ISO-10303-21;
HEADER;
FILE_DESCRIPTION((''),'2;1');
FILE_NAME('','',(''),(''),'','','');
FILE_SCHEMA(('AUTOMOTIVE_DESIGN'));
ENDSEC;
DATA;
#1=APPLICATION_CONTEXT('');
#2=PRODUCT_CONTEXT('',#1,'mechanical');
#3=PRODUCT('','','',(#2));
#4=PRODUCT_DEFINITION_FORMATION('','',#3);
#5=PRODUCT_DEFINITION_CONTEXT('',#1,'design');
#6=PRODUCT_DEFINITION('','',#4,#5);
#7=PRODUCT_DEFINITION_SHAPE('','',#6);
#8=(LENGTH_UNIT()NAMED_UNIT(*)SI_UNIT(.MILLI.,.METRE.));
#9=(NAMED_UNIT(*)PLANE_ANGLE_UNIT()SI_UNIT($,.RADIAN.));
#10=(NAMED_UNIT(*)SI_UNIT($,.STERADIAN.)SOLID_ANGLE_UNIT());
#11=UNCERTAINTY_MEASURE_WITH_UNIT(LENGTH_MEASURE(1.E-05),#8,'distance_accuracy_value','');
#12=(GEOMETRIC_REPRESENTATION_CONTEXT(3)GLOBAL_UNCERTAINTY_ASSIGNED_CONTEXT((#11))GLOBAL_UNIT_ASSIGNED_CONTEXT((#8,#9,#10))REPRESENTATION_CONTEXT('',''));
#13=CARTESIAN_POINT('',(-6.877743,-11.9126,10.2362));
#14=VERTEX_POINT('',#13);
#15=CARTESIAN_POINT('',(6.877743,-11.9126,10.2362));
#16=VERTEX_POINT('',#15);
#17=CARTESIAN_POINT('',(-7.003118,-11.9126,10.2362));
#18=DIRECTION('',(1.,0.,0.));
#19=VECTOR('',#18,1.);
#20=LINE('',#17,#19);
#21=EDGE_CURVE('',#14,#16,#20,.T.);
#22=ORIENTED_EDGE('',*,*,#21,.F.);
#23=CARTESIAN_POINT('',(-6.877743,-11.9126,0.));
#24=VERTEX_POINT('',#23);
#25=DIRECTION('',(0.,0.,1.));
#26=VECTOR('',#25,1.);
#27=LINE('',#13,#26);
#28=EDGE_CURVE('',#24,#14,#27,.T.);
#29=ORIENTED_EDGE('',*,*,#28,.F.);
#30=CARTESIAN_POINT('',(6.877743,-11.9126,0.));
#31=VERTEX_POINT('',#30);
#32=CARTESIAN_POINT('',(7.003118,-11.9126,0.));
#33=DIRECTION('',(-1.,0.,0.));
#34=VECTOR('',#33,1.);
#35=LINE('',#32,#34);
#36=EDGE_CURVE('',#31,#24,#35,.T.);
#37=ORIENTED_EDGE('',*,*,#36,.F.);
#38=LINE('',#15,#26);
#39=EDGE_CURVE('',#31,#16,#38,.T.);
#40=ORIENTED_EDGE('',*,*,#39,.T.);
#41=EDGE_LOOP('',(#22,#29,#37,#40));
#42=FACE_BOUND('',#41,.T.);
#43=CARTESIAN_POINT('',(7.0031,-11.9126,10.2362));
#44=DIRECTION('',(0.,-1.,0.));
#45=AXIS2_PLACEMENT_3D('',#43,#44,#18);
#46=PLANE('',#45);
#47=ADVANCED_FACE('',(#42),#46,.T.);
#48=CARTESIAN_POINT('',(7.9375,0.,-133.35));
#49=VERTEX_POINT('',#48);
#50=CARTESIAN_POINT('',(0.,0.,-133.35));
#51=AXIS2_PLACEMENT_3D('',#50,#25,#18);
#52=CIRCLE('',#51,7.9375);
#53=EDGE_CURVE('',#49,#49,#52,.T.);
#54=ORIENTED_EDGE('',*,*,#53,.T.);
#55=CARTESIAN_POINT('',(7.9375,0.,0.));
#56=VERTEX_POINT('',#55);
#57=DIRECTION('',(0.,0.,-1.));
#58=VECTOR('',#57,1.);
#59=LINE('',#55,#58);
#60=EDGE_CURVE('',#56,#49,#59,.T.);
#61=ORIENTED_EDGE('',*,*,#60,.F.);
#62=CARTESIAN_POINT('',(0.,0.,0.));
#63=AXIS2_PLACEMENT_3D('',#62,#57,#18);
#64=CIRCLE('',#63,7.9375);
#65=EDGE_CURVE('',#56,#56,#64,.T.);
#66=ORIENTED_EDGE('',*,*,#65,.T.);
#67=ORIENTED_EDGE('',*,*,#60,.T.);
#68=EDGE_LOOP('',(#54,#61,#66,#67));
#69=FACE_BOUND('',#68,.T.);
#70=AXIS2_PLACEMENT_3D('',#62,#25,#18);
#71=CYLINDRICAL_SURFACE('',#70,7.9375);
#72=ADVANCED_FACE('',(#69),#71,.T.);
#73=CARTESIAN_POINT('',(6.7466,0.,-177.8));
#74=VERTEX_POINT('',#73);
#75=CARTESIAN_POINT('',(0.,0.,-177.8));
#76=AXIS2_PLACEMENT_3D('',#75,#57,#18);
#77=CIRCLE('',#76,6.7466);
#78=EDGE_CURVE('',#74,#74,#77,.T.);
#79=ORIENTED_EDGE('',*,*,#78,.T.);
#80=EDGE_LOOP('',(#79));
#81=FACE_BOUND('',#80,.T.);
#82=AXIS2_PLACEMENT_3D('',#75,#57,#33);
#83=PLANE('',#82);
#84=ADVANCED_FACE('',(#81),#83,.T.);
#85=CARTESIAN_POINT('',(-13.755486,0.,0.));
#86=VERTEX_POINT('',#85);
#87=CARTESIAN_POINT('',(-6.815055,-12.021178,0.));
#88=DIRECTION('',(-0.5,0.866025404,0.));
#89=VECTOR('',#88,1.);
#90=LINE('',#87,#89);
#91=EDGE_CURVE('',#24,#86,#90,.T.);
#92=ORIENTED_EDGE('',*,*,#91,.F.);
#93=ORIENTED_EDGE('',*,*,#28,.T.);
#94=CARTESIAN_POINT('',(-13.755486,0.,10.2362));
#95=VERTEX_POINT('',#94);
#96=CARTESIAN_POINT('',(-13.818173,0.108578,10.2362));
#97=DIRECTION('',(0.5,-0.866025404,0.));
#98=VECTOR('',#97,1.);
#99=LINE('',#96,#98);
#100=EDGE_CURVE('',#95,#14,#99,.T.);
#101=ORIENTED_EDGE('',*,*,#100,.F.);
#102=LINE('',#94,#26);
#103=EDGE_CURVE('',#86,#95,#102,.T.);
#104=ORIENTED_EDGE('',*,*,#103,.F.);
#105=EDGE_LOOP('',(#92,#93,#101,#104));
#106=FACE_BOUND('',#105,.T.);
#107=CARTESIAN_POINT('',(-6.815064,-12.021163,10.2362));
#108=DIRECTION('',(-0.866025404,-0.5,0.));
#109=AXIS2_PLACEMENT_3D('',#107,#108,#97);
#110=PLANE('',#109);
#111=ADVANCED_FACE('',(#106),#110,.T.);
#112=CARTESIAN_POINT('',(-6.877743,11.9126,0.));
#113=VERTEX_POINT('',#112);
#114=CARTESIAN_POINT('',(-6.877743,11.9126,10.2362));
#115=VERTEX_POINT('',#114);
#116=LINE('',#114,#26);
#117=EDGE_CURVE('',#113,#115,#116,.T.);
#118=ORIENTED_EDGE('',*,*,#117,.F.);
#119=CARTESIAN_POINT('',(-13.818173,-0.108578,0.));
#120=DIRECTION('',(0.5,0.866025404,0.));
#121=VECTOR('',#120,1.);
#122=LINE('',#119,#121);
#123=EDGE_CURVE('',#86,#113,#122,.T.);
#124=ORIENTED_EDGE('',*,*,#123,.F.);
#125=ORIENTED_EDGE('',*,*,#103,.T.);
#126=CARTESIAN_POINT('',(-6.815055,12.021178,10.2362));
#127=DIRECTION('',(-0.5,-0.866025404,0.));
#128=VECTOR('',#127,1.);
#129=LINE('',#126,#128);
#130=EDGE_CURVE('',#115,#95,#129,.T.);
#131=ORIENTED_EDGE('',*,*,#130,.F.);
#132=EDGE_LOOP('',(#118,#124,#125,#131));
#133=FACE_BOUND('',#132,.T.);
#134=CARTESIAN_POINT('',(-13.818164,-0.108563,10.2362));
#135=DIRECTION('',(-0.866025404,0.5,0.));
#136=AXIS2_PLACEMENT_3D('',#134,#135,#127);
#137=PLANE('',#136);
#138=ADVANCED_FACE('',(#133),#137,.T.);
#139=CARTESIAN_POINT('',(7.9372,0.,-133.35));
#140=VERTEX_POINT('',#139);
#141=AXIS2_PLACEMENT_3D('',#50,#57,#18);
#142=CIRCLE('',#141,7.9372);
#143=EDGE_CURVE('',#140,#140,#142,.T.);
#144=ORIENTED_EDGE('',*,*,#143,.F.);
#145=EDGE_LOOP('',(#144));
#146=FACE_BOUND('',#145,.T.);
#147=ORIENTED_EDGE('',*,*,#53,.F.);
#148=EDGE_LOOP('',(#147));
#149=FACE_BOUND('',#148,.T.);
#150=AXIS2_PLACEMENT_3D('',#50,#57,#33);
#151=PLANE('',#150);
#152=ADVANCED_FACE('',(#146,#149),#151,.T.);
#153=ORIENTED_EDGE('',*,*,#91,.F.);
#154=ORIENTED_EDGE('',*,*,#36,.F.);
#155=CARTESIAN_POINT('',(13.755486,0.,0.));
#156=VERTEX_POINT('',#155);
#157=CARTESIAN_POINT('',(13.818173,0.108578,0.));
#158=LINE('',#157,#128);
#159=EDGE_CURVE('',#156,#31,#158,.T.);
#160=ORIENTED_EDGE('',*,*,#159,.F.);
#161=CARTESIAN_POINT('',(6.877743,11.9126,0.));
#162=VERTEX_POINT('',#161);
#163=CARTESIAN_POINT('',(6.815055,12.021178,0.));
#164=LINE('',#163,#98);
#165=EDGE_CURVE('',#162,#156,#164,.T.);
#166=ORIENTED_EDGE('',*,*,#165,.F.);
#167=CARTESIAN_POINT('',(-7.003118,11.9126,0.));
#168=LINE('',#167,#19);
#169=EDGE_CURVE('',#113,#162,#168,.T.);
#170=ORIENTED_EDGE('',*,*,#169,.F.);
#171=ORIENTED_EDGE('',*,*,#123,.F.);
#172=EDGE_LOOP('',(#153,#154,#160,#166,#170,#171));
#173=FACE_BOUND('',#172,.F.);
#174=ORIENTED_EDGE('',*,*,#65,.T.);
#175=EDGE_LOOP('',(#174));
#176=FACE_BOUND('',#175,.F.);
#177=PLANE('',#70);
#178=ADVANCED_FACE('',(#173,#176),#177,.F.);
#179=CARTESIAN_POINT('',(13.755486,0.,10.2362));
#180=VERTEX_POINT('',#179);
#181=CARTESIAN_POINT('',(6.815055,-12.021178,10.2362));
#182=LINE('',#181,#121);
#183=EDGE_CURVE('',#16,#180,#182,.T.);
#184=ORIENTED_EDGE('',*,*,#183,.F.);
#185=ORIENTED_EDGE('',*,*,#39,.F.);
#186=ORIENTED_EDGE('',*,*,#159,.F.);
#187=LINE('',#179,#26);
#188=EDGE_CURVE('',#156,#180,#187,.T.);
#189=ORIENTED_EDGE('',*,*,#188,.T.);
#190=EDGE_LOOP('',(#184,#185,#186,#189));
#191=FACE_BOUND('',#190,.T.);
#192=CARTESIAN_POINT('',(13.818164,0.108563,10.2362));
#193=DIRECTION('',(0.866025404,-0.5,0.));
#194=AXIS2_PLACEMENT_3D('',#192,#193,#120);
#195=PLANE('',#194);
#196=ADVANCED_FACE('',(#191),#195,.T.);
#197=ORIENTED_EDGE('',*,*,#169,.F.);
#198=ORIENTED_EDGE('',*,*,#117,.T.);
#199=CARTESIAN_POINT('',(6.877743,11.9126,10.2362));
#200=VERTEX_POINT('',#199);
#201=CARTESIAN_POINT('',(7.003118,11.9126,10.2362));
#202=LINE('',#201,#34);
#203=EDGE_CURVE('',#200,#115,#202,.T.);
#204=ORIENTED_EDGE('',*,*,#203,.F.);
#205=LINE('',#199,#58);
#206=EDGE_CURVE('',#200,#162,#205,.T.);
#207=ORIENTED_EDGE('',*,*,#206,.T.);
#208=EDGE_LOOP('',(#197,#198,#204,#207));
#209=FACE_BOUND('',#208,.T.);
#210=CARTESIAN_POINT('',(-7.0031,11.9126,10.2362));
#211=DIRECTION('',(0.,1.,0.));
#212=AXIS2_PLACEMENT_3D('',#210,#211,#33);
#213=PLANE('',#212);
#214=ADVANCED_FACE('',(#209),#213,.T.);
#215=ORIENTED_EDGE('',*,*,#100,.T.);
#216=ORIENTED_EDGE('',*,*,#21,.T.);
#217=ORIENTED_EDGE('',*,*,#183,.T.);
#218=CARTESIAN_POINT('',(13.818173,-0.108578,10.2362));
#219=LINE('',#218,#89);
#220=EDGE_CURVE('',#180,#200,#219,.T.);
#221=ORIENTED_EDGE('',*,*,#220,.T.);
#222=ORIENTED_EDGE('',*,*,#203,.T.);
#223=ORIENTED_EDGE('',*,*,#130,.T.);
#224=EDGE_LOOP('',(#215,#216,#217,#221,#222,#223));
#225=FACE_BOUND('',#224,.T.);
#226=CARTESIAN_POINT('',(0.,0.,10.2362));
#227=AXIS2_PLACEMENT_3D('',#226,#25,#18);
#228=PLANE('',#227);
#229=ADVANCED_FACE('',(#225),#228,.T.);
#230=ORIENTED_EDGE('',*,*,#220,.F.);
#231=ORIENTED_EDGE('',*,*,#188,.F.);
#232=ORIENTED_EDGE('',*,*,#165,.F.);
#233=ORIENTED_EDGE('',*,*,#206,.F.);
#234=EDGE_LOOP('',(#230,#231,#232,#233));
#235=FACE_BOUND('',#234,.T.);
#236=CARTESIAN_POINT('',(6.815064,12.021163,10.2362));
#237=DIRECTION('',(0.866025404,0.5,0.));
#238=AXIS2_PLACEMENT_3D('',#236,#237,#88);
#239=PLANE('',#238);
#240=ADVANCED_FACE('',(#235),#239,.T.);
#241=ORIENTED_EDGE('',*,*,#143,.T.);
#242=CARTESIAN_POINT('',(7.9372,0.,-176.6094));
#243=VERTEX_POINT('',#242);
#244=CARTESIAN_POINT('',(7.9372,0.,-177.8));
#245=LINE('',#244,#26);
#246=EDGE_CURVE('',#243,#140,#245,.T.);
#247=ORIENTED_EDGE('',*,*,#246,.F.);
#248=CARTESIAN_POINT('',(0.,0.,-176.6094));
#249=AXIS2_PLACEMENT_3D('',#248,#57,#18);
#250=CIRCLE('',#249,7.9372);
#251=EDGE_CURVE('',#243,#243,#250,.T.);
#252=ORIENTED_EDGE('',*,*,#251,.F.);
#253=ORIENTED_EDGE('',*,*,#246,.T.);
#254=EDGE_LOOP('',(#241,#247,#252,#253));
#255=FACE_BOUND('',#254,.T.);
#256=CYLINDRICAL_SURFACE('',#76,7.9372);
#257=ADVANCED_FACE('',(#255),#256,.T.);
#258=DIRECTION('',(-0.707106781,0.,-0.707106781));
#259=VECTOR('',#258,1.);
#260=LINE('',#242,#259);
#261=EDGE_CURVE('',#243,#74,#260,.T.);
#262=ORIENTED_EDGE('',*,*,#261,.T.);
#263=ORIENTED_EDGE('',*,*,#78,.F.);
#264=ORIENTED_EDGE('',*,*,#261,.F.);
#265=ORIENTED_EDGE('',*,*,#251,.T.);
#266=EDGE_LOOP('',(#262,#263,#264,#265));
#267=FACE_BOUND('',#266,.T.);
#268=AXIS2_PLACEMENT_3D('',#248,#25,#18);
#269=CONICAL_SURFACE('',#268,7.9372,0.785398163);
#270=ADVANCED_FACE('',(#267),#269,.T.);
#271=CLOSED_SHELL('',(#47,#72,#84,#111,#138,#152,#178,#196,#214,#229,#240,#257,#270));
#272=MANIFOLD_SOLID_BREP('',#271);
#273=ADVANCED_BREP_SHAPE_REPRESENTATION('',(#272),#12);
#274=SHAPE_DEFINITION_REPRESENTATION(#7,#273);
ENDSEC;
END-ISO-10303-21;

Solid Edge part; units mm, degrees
sketch "Sketch1" plane through (0, 0, 0) normal (0, 0, 1) x (1, 0, 0)
  circle A0 centre (0, 0) radius 13.8186
  dimension "D1" = 27.6372
extrude "Protrusion1" add sketch "Sketch1" along normal blind 10.2362
sketch "Sketch2" plane through (0, 0, 0) normal (0, 0, -1) x (1, 0, 0)
  circle A0 centre (0, 0) radius 7.9375
extrude "Protrusion2" add sketch "Sketch2" along normal blind 177.8
sketch "Sketch3" plane through (0, 0, -177.8) normal (0, 0, -1) x (1, 0, 0)
  circle A0 centre (0, 0) radius 7.9372
extrude "Cutout1" cut sketch "Sketch3" against normal blind 44.45 flip side to cut
chamfer "Chamfer_1" distance 1.1906 angle 45 1 edges at (-7.9372, 0, -177.8)
sketch "Sketch4" plane through (0, 0, 10.2362) normal (0, 0, 1) x (1, 0, 0)
  line L0 (-7.0031, 11.9126) -> (7.0031, 11.9126)
  dimension "D1" = 23.8252
extrude "Cutout2" cut sketch "Sketch4" against normal up to next material side at (0, 11.9626, 10.2362)
pattern_circular "Pattern1" count 6 over 360 about axis through (0, 0, 10.2362) along (0, 0, 1) of "Cutout2"
properties part number "24101040"
